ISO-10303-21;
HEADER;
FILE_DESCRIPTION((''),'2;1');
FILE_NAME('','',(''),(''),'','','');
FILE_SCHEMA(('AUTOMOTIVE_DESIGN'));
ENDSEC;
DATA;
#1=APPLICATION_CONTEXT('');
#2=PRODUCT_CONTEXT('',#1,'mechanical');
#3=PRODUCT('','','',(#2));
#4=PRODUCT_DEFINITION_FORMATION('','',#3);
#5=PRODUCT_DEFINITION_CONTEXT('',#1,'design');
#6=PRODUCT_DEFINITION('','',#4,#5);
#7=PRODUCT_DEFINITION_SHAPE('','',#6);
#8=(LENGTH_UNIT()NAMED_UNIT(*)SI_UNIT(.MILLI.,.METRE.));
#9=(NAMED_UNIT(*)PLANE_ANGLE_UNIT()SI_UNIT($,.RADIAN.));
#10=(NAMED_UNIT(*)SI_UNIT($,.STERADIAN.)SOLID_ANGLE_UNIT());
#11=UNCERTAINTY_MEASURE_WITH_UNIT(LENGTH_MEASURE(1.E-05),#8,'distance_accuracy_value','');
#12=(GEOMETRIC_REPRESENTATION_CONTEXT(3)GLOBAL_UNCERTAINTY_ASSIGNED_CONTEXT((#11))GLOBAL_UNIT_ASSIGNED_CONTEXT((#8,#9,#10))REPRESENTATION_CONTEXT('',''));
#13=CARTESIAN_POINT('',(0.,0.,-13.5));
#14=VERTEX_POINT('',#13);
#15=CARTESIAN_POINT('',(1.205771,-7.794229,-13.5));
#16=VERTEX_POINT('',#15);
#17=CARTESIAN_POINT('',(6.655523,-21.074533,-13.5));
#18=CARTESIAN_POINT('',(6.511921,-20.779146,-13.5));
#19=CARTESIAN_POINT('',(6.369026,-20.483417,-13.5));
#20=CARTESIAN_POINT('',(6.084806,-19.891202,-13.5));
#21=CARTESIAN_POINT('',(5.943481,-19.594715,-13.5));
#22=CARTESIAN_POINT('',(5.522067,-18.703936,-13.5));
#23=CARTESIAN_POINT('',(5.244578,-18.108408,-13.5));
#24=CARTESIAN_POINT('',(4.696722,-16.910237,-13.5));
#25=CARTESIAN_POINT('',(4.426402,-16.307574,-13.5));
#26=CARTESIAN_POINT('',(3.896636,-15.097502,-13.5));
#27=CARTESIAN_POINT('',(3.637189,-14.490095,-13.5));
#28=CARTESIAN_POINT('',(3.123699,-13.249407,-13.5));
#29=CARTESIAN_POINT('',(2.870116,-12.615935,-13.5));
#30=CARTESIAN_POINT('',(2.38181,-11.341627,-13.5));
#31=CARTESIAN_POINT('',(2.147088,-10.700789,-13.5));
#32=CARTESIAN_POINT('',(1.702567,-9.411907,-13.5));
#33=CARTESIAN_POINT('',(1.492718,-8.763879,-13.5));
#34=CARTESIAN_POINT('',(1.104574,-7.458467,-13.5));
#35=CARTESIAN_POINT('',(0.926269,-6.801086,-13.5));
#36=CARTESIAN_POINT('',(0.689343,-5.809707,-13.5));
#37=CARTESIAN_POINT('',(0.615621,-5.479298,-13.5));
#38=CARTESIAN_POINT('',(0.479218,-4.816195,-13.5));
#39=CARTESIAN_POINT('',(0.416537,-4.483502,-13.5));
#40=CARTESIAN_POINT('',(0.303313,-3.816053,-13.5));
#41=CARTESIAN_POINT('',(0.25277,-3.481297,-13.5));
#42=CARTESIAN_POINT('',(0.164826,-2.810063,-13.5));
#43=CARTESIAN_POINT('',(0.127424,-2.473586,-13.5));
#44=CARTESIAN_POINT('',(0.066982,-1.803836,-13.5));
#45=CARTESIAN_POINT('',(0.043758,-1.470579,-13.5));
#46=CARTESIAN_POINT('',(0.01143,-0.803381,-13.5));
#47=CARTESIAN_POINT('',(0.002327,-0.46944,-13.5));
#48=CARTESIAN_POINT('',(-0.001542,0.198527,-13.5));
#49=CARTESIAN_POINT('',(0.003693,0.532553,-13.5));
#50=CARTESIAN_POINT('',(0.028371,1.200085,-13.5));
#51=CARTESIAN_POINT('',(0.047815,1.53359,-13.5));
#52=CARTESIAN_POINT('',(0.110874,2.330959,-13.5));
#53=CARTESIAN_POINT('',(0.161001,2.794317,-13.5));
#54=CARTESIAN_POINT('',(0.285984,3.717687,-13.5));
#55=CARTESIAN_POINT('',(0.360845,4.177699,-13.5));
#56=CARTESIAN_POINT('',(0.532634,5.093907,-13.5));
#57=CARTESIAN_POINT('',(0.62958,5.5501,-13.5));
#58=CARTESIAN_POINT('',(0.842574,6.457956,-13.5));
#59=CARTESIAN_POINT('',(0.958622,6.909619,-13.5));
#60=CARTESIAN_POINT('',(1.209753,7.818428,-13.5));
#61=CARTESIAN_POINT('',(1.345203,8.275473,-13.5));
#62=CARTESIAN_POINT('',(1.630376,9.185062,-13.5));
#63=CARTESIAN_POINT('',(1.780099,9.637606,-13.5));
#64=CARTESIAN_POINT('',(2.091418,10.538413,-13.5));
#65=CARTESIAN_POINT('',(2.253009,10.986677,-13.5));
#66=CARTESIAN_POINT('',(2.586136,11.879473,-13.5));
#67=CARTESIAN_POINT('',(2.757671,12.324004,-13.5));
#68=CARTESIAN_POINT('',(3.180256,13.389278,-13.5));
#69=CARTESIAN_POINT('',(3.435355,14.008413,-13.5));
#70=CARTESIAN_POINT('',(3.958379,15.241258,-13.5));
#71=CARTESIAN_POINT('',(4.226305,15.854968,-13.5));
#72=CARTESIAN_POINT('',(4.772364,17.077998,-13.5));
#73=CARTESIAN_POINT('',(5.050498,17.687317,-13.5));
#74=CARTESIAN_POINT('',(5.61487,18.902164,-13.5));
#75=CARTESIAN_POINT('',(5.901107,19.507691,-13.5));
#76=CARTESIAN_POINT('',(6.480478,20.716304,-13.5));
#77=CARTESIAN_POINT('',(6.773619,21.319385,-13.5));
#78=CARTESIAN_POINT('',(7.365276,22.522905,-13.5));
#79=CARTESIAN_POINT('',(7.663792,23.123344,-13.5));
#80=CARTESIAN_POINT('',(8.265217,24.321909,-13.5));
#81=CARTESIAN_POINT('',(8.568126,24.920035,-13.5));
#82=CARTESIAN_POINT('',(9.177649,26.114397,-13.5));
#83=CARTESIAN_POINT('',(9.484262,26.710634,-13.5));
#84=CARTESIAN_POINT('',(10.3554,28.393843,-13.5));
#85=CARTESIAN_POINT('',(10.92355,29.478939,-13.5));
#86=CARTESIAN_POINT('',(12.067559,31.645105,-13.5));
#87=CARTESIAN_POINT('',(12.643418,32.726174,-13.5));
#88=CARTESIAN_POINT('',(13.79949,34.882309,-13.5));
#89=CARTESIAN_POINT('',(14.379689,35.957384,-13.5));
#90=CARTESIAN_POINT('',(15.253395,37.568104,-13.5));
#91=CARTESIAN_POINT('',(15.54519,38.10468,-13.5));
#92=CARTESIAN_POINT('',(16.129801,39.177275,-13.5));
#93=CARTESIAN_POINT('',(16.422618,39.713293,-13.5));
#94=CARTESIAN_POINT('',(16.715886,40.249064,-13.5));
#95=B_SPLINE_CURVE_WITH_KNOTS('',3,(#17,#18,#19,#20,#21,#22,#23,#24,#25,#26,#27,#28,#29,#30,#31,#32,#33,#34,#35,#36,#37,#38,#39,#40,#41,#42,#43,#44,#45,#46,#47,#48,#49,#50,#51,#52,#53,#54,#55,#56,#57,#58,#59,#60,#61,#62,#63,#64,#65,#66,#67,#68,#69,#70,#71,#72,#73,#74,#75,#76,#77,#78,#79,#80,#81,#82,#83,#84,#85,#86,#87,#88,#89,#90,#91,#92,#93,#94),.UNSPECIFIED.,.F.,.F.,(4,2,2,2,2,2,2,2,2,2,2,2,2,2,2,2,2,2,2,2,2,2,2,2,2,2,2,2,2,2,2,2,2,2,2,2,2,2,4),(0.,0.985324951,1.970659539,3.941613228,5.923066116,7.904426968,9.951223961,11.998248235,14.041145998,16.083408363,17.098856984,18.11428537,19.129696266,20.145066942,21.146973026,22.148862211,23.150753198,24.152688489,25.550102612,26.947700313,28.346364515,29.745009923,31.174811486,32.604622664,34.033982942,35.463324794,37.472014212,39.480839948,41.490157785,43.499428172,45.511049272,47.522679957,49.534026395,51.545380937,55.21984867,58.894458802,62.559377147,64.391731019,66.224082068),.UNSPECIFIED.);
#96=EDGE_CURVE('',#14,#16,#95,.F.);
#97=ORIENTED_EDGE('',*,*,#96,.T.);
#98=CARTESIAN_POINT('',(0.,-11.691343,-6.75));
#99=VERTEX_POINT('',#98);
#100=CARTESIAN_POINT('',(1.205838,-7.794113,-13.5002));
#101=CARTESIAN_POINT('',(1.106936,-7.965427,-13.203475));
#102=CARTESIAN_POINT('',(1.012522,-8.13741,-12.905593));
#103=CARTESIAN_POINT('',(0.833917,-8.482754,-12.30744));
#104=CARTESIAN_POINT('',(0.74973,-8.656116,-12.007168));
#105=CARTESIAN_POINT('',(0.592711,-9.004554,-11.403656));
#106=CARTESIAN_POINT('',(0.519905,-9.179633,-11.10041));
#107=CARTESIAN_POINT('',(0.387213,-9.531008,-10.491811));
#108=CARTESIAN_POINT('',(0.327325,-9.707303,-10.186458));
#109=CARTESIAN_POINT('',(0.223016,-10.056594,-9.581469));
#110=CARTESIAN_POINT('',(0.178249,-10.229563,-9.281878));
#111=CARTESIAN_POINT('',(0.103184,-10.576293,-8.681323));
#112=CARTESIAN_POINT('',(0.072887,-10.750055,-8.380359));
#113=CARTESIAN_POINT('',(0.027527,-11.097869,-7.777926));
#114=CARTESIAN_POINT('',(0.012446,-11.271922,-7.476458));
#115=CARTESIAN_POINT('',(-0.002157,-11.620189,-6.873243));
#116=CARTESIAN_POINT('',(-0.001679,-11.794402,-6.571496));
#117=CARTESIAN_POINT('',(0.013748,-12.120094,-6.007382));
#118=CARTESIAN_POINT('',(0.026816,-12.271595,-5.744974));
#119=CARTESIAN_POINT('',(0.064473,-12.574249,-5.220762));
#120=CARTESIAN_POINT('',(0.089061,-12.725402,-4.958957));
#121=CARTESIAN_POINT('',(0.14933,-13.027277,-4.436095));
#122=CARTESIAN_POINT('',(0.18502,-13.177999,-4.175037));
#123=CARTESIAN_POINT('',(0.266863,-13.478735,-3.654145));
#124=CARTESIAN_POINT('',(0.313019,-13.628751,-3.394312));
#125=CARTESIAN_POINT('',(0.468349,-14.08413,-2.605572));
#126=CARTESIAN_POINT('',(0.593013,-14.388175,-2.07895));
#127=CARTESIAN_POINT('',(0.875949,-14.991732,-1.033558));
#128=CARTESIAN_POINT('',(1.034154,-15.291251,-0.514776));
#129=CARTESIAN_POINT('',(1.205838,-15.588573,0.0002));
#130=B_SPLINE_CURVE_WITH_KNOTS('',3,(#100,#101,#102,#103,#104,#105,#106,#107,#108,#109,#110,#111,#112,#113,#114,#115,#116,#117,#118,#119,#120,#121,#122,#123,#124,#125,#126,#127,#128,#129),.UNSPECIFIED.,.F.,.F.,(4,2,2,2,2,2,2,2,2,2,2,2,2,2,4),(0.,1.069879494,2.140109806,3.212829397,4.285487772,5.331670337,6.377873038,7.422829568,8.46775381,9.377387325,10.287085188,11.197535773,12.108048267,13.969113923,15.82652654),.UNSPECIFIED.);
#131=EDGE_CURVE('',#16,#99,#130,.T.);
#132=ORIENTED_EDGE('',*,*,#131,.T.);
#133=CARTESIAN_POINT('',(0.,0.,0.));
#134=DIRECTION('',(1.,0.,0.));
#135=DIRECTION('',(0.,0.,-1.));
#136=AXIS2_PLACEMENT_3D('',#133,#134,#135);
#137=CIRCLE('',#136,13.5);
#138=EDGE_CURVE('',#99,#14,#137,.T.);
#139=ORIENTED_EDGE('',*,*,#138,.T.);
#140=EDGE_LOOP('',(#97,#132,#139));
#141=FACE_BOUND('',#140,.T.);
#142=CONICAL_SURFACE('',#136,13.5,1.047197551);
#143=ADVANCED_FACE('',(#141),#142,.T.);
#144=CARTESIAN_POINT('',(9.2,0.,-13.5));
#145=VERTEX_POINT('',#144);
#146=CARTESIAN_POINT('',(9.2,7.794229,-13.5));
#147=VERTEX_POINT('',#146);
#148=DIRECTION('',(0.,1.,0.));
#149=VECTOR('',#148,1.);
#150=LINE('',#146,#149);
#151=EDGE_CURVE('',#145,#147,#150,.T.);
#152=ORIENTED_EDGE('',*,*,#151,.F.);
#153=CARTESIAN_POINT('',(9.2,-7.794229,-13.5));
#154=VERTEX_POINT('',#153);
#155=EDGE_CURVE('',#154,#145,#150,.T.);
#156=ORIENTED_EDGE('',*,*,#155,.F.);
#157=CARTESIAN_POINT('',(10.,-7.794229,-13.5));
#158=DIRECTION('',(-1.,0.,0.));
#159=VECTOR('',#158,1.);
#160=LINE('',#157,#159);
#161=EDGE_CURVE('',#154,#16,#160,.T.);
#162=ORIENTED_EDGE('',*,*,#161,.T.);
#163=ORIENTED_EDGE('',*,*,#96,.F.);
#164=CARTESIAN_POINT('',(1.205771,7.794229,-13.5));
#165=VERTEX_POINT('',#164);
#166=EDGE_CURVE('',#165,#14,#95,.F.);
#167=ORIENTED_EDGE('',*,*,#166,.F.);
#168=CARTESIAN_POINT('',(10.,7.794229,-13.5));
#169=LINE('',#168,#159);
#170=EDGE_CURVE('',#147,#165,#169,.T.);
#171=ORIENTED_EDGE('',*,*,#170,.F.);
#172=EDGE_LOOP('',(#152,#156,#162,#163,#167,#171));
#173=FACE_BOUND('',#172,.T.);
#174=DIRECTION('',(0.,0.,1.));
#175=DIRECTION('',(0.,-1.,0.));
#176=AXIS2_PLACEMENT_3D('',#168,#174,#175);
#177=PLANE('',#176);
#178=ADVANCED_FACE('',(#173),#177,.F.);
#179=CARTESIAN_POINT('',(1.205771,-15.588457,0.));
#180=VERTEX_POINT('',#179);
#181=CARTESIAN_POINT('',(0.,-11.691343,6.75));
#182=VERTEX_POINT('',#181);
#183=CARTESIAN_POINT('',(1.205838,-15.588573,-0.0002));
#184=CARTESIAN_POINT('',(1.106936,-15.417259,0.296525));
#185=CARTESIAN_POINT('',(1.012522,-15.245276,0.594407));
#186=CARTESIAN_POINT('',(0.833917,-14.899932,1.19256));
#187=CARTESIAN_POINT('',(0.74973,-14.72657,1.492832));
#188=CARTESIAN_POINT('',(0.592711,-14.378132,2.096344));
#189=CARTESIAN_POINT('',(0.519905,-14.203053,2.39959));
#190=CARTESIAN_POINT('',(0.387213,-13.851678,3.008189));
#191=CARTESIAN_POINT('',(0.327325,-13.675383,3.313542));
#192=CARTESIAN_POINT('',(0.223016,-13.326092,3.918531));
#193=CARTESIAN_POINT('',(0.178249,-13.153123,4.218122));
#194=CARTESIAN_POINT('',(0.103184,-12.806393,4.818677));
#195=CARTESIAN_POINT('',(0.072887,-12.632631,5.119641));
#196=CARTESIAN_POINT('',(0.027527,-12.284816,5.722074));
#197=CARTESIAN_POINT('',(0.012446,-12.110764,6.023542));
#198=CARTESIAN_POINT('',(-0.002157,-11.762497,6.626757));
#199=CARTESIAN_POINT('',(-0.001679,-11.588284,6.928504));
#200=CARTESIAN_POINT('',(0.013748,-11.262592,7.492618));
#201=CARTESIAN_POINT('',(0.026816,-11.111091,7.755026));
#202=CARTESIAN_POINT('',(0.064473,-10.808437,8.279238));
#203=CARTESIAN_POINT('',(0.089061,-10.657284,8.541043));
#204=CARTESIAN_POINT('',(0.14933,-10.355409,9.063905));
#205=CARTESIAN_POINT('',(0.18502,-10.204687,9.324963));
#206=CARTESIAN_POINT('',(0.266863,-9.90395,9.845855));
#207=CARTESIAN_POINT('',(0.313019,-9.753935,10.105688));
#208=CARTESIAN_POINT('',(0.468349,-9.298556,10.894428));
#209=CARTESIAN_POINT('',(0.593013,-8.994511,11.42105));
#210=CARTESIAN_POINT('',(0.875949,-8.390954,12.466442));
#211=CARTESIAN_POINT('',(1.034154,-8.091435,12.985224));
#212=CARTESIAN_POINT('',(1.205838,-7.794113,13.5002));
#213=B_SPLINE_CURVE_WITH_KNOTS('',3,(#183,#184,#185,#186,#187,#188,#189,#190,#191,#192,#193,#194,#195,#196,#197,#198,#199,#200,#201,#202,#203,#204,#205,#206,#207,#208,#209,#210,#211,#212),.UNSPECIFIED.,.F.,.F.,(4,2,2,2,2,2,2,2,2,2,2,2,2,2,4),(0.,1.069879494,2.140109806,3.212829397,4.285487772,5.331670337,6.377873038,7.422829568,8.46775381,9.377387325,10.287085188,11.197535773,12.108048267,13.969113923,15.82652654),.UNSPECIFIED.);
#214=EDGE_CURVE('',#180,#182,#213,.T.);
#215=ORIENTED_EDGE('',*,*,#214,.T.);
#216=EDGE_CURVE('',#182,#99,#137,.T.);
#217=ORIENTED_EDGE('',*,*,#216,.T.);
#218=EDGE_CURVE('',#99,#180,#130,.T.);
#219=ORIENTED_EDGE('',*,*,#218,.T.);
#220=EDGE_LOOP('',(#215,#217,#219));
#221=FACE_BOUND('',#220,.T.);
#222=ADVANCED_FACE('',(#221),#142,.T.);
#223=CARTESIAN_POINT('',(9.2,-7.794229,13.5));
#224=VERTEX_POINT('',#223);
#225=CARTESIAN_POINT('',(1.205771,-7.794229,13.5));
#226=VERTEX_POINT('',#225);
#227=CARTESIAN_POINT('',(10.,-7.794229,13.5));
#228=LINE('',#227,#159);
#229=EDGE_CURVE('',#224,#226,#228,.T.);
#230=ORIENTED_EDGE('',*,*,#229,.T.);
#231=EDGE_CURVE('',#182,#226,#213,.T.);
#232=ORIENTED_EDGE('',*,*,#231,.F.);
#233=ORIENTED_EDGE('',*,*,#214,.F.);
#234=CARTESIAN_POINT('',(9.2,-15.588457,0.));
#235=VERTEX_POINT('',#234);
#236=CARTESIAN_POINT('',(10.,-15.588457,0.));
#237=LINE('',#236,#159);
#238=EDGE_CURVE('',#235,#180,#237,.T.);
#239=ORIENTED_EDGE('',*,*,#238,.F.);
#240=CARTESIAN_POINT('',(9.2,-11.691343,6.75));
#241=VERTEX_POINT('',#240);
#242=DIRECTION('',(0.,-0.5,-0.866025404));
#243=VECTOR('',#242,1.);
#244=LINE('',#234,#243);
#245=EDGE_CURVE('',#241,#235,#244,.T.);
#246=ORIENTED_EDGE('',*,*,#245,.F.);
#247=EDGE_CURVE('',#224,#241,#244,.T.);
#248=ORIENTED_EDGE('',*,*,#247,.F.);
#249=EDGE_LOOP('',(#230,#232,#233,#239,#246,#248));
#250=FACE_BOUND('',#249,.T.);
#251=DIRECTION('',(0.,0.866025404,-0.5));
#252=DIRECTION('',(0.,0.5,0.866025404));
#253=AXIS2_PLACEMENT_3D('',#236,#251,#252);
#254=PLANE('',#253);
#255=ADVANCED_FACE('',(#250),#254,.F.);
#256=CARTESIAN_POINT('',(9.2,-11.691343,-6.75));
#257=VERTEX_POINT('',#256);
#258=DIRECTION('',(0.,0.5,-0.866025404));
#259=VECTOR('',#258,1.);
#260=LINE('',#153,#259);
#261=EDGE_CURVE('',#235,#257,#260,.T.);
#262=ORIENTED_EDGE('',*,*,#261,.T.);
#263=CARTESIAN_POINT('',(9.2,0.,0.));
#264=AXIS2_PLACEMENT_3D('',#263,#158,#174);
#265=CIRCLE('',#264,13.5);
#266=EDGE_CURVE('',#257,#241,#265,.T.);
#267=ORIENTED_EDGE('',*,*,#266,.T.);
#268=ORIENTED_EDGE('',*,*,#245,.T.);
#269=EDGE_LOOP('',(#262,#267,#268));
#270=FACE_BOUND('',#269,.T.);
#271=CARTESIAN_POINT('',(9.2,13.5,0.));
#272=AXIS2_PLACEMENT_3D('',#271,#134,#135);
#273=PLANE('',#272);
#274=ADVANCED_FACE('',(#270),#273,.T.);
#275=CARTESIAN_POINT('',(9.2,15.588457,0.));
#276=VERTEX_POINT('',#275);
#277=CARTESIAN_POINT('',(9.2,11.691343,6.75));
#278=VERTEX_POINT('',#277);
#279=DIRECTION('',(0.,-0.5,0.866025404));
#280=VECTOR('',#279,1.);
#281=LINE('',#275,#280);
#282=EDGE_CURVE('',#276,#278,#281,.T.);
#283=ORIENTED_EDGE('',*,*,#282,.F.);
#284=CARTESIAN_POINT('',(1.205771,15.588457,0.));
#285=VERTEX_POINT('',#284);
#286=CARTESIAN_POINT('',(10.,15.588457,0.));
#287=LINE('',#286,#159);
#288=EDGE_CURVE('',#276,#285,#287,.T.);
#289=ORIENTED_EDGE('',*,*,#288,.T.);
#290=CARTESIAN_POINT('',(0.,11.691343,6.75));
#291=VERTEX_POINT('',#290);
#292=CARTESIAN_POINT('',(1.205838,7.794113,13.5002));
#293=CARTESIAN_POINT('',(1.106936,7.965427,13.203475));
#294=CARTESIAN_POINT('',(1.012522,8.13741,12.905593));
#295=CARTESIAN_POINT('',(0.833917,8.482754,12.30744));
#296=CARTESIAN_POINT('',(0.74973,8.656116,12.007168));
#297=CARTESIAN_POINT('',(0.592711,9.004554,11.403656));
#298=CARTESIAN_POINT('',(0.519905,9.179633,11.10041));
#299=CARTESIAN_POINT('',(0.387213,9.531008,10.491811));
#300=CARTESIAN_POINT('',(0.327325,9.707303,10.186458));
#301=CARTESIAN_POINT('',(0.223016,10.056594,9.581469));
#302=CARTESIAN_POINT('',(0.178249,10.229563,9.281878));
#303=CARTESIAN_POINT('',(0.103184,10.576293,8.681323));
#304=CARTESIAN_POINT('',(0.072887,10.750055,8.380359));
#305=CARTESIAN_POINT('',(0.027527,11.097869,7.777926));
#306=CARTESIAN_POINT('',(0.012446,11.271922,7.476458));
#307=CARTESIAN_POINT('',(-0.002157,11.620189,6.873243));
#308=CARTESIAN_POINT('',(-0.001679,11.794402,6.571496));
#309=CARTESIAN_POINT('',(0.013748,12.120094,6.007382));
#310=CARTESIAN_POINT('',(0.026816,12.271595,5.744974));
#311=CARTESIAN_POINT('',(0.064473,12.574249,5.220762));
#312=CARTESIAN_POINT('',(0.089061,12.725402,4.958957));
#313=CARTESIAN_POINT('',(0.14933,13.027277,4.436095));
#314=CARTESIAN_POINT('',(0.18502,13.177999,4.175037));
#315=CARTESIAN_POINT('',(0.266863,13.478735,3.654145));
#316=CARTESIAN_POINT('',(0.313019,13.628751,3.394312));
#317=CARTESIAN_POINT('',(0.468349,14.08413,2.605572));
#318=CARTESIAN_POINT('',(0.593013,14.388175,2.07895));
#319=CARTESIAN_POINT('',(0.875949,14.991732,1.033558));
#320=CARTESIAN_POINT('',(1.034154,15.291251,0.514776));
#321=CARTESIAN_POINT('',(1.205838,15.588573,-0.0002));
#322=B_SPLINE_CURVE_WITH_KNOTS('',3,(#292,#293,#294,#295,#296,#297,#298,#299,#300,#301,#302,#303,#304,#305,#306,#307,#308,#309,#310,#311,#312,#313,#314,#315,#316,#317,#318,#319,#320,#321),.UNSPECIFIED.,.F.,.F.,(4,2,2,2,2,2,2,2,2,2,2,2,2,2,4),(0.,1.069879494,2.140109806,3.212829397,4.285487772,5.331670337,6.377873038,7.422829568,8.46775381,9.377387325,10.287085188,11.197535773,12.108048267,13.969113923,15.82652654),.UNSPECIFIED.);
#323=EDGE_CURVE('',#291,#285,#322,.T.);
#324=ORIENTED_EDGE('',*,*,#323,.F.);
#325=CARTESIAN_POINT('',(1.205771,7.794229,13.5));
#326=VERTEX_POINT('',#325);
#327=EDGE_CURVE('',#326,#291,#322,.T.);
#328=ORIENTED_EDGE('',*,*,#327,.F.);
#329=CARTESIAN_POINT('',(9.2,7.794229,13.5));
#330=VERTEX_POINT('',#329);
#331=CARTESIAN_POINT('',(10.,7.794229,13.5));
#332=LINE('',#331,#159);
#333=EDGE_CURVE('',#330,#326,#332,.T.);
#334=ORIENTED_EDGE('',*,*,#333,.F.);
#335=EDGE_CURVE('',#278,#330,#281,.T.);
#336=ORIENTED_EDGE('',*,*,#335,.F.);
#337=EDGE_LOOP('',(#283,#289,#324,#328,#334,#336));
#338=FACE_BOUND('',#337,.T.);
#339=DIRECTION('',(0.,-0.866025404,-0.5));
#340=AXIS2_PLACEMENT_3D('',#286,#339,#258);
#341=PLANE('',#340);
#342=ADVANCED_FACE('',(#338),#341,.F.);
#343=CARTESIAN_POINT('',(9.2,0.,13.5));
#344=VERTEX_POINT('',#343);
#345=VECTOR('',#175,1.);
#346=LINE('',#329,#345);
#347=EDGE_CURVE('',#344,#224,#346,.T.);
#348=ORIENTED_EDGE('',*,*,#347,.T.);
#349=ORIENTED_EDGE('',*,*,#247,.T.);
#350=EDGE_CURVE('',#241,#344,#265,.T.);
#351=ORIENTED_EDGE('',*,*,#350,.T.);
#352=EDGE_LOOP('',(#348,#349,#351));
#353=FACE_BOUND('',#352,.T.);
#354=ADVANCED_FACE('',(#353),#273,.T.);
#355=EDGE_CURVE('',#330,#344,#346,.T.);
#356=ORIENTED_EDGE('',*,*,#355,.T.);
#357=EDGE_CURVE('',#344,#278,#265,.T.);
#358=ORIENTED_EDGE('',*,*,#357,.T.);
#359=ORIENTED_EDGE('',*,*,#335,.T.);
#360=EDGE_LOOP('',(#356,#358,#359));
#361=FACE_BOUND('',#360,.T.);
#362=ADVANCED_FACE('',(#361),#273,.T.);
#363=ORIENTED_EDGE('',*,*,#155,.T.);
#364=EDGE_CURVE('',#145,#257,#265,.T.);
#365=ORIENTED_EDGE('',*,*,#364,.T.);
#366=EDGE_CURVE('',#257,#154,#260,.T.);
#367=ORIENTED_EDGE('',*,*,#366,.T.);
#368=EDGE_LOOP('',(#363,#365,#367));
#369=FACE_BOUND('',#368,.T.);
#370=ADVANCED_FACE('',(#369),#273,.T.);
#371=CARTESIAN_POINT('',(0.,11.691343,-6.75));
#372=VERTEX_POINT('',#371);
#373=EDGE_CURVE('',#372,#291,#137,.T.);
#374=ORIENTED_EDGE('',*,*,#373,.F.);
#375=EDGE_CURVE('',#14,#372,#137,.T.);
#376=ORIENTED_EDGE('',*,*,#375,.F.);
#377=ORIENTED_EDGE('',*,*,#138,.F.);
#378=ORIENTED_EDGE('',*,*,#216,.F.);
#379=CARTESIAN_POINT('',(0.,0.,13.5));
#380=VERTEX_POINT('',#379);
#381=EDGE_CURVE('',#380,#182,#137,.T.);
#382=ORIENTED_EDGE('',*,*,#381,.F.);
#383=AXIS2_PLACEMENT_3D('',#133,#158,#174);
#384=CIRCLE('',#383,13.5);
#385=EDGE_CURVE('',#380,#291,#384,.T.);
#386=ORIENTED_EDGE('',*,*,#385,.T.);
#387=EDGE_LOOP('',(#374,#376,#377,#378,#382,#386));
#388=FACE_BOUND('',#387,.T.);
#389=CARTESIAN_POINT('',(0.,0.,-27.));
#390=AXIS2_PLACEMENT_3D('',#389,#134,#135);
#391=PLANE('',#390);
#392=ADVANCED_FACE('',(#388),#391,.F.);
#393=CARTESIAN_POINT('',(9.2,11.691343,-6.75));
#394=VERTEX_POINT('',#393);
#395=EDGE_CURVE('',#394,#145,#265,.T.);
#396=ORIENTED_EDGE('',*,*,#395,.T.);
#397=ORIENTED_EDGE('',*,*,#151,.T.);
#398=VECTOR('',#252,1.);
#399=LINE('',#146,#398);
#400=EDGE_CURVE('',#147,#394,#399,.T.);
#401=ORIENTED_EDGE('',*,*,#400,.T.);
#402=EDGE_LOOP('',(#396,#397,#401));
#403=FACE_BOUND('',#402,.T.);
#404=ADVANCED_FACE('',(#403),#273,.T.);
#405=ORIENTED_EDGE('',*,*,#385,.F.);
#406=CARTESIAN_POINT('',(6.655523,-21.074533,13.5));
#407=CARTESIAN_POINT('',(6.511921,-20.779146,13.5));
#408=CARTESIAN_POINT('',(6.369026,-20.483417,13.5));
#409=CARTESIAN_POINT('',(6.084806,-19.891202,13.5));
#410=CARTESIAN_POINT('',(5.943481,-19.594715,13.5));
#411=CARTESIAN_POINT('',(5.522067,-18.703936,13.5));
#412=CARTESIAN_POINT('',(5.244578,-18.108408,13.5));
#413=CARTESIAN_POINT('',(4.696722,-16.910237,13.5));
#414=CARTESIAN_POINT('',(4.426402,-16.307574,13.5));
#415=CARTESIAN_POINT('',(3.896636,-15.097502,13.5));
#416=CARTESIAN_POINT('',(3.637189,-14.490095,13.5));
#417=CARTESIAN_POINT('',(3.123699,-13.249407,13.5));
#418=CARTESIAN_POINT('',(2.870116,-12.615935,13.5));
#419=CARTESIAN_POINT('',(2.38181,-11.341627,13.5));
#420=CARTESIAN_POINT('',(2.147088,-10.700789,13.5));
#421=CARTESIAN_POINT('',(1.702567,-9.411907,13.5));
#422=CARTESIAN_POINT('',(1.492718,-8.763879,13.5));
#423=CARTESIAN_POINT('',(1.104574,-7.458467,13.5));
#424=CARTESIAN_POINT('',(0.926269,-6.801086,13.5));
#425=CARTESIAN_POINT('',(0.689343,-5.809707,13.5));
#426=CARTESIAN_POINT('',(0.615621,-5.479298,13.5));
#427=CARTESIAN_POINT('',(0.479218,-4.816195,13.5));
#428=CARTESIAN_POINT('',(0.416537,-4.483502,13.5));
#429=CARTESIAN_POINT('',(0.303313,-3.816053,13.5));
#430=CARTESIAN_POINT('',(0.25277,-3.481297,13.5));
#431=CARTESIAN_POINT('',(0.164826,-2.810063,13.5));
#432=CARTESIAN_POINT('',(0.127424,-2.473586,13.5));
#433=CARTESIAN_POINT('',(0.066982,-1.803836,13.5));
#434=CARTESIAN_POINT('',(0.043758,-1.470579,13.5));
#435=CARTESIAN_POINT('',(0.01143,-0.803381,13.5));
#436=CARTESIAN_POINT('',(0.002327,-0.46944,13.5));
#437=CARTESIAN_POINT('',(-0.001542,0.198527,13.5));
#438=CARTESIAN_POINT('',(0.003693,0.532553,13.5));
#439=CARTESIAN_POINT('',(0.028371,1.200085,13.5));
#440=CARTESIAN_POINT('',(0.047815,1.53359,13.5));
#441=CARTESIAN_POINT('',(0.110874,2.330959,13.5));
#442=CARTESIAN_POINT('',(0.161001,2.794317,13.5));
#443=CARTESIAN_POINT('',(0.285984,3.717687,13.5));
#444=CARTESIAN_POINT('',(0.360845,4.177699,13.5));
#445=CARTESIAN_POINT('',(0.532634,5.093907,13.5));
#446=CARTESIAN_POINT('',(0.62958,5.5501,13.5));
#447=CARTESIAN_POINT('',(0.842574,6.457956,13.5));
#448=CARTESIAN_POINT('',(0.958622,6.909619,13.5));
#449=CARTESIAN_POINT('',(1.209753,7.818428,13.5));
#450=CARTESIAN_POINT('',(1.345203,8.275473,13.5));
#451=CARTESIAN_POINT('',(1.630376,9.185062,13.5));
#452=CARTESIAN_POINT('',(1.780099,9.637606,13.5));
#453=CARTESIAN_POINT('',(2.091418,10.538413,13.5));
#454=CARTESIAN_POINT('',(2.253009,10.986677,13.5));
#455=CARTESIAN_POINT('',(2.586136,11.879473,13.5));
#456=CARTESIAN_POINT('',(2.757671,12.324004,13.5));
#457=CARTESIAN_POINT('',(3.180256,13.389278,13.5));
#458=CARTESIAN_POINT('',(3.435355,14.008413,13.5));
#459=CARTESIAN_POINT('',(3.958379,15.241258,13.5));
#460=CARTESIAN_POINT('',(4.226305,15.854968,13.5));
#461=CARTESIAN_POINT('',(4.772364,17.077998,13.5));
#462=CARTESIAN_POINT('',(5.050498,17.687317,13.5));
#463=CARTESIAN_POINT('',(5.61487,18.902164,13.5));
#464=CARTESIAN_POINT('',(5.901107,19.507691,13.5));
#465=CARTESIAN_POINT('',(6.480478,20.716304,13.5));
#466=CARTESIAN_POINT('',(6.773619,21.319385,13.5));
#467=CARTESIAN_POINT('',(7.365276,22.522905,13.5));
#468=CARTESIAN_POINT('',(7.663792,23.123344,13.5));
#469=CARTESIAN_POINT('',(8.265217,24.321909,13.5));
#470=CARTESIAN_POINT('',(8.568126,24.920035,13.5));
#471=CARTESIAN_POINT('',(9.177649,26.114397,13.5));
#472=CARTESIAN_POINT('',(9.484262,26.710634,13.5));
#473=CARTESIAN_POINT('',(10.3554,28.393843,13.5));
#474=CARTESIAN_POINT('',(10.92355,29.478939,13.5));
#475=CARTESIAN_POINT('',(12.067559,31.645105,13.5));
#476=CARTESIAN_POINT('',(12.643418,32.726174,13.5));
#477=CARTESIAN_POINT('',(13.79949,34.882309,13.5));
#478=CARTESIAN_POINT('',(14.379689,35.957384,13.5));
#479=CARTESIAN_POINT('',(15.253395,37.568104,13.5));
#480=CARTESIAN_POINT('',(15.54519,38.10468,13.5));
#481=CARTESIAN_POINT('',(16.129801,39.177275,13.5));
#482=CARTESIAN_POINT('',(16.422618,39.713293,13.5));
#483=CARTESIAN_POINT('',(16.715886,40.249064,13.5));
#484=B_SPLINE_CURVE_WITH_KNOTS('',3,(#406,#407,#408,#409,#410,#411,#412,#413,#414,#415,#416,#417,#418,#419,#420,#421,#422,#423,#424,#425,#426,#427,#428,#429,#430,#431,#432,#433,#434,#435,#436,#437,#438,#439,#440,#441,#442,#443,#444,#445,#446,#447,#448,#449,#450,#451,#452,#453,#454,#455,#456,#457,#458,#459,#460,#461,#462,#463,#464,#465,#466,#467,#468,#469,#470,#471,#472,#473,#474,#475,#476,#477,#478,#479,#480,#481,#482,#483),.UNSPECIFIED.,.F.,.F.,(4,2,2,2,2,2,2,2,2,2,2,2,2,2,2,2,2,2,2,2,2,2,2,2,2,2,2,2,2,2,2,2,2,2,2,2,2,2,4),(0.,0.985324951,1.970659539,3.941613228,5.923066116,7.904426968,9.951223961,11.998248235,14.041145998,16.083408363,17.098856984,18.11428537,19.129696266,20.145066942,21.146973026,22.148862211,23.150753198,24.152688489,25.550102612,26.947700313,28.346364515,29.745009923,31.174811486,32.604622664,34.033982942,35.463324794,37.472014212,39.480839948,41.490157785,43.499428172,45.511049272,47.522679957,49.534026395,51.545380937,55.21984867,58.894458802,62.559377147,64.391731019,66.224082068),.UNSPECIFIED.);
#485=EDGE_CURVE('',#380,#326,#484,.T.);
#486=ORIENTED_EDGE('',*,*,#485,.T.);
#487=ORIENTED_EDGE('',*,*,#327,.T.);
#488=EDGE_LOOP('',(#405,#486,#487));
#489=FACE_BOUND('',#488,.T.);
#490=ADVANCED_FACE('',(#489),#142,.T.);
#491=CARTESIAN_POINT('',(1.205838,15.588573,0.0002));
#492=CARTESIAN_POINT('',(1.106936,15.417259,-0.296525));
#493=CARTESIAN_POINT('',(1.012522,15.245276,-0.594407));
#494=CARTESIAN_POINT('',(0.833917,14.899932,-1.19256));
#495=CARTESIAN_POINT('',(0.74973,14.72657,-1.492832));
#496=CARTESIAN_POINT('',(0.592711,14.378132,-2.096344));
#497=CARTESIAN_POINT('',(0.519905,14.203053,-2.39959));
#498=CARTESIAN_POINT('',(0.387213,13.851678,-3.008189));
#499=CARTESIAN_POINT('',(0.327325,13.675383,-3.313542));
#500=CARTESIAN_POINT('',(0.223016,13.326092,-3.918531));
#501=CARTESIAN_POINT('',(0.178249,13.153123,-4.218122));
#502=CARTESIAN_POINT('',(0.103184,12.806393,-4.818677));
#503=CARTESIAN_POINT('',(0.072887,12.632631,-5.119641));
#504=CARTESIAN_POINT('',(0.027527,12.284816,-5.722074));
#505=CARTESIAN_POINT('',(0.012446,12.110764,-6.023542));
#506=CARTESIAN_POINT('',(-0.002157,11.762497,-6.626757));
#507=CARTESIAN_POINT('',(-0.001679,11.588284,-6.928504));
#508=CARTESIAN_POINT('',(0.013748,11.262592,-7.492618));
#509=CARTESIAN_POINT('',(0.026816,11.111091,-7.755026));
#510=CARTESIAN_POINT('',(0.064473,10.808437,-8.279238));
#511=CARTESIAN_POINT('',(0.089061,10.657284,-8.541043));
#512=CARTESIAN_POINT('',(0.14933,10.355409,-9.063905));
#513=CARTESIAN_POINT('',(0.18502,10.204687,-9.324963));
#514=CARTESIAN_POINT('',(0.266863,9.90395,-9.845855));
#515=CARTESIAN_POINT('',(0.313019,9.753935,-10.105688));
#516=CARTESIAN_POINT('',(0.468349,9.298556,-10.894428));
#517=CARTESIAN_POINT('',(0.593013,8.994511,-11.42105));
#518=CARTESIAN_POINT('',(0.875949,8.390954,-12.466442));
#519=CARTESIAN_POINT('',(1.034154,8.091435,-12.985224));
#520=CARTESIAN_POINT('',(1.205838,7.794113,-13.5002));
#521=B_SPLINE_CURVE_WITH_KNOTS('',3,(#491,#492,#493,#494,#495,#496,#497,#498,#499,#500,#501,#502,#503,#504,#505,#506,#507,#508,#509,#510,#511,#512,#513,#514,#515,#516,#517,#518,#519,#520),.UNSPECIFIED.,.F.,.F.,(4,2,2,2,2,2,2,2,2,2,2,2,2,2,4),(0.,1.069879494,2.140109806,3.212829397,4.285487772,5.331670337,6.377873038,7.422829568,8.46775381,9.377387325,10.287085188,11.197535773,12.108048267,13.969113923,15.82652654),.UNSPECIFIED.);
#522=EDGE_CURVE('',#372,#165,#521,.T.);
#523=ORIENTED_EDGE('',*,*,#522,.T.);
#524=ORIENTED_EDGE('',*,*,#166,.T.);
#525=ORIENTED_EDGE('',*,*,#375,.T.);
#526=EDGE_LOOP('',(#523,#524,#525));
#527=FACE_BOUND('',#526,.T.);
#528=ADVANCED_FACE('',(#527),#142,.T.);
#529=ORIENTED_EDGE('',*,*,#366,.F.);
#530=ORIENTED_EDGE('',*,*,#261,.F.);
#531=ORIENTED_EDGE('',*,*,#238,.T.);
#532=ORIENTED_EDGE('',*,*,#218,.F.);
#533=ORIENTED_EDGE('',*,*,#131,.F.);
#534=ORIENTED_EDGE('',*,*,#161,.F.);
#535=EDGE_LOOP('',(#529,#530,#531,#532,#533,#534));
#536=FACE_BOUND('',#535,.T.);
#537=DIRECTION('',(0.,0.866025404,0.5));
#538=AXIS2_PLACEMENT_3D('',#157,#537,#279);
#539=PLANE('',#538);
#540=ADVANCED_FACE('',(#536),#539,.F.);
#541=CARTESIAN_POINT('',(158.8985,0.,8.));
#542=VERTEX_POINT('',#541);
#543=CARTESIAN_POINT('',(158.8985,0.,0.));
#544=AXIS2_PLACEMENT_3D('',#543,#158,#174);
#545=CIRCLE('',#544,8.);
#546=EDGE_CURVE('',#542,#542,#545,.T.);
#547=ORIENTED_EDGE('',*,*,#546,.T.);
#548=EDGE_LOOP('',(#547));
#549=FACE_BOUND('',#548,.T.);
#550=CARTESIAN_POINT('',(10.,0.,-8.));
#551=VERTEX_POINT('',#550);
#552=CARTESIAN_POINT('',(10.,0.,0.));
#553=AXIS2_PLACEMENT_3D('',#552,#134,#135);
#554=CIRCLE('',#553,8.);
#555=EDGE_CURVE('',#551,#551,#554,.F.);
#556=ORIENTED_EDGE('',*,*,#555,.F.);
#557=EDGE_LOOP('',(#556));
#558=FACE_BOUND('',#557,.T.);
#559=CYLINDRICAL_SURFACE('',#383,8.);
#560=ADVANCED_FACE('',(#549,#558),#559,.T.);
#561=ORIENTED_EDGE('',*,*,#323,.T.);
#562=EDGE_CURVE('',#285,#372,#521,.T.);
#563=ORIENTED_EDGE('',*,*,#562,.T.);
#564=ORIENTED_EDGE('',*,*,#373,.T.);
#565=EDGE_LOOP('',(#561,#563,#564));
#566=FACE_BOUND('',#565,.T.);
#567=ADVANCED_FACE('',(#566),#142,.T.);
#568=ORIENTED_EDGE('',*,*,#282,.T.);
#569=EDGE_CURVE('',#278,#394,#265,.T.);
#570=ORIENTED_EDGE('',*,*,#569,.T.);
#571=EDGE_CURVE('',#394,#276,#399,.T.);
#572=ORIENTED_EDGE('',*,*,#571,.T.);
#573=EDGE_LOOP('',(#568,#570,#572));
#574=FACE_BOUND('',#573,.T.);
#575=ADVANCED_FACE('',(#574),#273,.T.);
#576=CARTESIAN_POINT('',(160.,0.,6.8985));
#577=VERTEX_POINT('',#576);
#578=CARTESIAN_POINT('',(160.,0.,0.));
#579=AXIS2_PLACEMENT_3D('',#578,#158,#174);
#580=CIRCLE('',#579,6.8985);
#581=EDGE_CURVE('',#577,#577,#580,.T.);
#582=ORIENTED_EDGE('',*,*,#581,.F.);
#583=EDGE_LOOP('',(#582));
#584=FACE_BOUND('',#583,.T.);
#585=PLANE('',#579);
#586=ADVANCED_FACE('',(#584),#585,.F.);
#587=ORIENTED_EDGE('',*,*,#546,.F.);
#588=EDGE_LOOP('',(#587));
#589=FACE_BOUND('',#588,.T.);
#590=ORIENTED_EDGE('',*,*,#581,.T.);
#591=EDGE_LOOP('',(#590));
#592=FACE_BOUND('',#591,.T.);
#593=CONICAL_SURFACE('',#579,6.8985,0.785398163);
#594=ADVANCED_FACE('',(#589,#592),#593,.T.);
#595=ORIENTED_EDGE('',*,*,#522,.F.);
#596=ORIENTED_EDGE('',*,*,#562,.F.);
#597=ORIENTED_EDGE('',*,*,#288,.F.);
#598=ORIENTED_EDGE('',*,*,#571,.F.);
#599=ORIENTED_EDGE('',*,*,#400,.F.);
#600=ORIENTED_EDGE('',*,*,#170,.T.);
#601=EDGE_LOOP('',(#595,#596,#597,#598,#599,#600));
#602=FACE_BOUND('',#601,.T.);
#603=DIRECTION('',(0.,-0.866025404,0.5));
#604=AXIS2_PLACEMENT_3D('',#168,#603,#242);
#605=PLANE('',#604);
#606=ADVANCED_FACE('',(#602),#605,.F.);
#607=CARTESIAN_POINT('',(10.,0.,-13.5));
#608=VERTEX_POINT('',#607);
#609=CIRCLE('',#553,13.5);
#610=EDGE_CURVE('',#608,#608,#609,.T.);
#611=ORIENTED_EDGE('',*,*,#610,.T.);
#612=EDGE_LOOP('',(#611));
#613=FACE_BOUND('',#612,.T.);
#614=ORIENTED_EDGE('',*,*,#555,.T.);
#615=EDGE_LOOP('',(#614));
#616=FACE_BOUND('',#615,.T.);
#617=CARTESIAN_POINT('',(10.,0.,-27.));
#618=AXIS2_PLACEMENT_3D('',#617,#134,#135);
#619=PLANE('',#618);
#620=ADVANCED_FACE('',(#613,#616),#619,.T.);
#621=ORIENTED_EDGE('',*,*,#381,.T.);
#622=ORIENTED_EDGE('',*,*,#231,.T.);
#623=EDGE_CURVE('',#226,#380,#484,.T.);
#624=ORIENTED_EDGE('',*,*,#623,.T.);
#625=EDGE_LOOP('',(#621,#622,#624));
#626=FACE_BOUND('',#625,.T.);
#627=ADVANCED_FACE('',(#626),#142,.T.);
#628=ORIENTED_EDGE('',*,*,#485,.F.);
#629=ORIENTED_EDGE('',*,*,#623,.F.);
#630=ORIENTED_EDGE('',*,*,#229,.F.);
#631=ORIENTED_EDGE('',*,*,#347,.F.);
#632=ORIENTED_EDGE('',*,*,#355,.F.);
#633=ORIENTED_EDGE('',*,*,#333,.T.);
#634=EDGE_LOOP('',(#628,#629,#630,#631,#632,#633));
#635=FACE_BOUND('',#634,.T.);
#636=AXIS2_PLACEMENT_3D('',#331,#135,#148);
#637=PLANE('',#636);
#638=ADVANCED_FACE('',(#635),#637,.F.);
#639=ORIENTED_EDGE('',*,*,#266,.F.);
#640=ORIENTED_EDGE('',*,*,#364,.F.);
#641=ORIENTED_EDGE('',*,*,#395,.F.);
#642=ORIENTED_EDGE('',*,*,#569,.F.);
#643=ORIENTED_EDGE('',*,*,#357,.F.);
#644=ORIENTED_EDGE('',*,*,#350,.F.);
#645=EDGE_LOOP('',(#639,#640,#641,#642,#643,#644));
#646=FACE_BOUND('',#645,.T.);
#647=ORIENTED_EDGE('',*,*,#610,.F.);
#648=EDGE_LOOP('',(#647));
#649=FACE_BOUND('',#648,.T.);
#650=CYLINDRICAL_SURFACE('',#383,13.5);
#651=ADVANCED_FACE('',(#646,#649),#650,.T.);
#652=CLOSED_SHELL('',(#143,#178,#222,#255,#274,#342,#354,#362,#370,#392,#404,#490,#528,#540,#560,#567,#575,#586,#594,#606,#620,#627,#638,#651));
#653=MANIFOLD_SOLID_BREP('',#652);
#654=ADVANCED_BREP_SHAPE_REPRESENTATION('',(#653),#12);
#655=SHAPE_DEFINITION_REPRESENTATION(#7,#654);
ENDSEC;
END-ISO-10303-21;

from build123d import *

# Parameters (mm, degrees)
BASEHEAD_DEPTH = 10
SKETCH4_W      = 0.8
SKETCH4_H      = 12.088457268


# Read off the part's stored shape, not the designer's step: HeadChamfer
with BuildPart() as part:
    # Sketch1 → BaseHead (new body)
    with BuildSketch(Plane(origin=(0, 0, 0), x_dir=(0, 0, -1), z_dir=(1, 0, 0))):
        Polygon((13.5, 7.794228634), (13.5, -7.794228634), (0, -15.588457268), (-13.5, -7.794228634), (-13.5, 7.794228634), (0, 15.588457268), align=None)
    extrude(amount=BASEHEAD_DEPTH)

    # HeadChamfer outline → HeadChamfer (revolve, cut)
    with BuildSketch(Plane.YX):
        Polygon((15.58845727, 1.205771367), (13.499999851, -8.6e-08), (15.58845727, -8.6e-08), align=None)
    revolve(axis=Axis((0, 0, 0), (1, 0, 0)), mode=Mode.SUBTRACT)

    # HeadChamfer 2 outline → HeadChamfer 2 (revolve)
    with BuildSketch(Plane.YX):
        Polygon((8, 10), (8, 158.8985), (6.8985, 160), (0, 160), (0, 10), align=None)
    revolve(axis=Axis((0, 0, 0), (1, 0, 0)))

    # Sketch4 → BearingFace (revolve, cut)
    with BuildSketch(Plane.XY, mode=Mode.PRIVATE) as bearingface_sk:
        with Locations((9.6, 19.544228634)):
            Rectangle(SKETCH4_W, SKETCH4_H)
    revolve(bearingface_sk.sketch.rotate(Axis((0, 0, 0), (1, 0, 0)), 90), axis=Axis((0, 0, 0), (1, 0, 0)), mode=Mode.SUBTRACT)


solid = part.part
